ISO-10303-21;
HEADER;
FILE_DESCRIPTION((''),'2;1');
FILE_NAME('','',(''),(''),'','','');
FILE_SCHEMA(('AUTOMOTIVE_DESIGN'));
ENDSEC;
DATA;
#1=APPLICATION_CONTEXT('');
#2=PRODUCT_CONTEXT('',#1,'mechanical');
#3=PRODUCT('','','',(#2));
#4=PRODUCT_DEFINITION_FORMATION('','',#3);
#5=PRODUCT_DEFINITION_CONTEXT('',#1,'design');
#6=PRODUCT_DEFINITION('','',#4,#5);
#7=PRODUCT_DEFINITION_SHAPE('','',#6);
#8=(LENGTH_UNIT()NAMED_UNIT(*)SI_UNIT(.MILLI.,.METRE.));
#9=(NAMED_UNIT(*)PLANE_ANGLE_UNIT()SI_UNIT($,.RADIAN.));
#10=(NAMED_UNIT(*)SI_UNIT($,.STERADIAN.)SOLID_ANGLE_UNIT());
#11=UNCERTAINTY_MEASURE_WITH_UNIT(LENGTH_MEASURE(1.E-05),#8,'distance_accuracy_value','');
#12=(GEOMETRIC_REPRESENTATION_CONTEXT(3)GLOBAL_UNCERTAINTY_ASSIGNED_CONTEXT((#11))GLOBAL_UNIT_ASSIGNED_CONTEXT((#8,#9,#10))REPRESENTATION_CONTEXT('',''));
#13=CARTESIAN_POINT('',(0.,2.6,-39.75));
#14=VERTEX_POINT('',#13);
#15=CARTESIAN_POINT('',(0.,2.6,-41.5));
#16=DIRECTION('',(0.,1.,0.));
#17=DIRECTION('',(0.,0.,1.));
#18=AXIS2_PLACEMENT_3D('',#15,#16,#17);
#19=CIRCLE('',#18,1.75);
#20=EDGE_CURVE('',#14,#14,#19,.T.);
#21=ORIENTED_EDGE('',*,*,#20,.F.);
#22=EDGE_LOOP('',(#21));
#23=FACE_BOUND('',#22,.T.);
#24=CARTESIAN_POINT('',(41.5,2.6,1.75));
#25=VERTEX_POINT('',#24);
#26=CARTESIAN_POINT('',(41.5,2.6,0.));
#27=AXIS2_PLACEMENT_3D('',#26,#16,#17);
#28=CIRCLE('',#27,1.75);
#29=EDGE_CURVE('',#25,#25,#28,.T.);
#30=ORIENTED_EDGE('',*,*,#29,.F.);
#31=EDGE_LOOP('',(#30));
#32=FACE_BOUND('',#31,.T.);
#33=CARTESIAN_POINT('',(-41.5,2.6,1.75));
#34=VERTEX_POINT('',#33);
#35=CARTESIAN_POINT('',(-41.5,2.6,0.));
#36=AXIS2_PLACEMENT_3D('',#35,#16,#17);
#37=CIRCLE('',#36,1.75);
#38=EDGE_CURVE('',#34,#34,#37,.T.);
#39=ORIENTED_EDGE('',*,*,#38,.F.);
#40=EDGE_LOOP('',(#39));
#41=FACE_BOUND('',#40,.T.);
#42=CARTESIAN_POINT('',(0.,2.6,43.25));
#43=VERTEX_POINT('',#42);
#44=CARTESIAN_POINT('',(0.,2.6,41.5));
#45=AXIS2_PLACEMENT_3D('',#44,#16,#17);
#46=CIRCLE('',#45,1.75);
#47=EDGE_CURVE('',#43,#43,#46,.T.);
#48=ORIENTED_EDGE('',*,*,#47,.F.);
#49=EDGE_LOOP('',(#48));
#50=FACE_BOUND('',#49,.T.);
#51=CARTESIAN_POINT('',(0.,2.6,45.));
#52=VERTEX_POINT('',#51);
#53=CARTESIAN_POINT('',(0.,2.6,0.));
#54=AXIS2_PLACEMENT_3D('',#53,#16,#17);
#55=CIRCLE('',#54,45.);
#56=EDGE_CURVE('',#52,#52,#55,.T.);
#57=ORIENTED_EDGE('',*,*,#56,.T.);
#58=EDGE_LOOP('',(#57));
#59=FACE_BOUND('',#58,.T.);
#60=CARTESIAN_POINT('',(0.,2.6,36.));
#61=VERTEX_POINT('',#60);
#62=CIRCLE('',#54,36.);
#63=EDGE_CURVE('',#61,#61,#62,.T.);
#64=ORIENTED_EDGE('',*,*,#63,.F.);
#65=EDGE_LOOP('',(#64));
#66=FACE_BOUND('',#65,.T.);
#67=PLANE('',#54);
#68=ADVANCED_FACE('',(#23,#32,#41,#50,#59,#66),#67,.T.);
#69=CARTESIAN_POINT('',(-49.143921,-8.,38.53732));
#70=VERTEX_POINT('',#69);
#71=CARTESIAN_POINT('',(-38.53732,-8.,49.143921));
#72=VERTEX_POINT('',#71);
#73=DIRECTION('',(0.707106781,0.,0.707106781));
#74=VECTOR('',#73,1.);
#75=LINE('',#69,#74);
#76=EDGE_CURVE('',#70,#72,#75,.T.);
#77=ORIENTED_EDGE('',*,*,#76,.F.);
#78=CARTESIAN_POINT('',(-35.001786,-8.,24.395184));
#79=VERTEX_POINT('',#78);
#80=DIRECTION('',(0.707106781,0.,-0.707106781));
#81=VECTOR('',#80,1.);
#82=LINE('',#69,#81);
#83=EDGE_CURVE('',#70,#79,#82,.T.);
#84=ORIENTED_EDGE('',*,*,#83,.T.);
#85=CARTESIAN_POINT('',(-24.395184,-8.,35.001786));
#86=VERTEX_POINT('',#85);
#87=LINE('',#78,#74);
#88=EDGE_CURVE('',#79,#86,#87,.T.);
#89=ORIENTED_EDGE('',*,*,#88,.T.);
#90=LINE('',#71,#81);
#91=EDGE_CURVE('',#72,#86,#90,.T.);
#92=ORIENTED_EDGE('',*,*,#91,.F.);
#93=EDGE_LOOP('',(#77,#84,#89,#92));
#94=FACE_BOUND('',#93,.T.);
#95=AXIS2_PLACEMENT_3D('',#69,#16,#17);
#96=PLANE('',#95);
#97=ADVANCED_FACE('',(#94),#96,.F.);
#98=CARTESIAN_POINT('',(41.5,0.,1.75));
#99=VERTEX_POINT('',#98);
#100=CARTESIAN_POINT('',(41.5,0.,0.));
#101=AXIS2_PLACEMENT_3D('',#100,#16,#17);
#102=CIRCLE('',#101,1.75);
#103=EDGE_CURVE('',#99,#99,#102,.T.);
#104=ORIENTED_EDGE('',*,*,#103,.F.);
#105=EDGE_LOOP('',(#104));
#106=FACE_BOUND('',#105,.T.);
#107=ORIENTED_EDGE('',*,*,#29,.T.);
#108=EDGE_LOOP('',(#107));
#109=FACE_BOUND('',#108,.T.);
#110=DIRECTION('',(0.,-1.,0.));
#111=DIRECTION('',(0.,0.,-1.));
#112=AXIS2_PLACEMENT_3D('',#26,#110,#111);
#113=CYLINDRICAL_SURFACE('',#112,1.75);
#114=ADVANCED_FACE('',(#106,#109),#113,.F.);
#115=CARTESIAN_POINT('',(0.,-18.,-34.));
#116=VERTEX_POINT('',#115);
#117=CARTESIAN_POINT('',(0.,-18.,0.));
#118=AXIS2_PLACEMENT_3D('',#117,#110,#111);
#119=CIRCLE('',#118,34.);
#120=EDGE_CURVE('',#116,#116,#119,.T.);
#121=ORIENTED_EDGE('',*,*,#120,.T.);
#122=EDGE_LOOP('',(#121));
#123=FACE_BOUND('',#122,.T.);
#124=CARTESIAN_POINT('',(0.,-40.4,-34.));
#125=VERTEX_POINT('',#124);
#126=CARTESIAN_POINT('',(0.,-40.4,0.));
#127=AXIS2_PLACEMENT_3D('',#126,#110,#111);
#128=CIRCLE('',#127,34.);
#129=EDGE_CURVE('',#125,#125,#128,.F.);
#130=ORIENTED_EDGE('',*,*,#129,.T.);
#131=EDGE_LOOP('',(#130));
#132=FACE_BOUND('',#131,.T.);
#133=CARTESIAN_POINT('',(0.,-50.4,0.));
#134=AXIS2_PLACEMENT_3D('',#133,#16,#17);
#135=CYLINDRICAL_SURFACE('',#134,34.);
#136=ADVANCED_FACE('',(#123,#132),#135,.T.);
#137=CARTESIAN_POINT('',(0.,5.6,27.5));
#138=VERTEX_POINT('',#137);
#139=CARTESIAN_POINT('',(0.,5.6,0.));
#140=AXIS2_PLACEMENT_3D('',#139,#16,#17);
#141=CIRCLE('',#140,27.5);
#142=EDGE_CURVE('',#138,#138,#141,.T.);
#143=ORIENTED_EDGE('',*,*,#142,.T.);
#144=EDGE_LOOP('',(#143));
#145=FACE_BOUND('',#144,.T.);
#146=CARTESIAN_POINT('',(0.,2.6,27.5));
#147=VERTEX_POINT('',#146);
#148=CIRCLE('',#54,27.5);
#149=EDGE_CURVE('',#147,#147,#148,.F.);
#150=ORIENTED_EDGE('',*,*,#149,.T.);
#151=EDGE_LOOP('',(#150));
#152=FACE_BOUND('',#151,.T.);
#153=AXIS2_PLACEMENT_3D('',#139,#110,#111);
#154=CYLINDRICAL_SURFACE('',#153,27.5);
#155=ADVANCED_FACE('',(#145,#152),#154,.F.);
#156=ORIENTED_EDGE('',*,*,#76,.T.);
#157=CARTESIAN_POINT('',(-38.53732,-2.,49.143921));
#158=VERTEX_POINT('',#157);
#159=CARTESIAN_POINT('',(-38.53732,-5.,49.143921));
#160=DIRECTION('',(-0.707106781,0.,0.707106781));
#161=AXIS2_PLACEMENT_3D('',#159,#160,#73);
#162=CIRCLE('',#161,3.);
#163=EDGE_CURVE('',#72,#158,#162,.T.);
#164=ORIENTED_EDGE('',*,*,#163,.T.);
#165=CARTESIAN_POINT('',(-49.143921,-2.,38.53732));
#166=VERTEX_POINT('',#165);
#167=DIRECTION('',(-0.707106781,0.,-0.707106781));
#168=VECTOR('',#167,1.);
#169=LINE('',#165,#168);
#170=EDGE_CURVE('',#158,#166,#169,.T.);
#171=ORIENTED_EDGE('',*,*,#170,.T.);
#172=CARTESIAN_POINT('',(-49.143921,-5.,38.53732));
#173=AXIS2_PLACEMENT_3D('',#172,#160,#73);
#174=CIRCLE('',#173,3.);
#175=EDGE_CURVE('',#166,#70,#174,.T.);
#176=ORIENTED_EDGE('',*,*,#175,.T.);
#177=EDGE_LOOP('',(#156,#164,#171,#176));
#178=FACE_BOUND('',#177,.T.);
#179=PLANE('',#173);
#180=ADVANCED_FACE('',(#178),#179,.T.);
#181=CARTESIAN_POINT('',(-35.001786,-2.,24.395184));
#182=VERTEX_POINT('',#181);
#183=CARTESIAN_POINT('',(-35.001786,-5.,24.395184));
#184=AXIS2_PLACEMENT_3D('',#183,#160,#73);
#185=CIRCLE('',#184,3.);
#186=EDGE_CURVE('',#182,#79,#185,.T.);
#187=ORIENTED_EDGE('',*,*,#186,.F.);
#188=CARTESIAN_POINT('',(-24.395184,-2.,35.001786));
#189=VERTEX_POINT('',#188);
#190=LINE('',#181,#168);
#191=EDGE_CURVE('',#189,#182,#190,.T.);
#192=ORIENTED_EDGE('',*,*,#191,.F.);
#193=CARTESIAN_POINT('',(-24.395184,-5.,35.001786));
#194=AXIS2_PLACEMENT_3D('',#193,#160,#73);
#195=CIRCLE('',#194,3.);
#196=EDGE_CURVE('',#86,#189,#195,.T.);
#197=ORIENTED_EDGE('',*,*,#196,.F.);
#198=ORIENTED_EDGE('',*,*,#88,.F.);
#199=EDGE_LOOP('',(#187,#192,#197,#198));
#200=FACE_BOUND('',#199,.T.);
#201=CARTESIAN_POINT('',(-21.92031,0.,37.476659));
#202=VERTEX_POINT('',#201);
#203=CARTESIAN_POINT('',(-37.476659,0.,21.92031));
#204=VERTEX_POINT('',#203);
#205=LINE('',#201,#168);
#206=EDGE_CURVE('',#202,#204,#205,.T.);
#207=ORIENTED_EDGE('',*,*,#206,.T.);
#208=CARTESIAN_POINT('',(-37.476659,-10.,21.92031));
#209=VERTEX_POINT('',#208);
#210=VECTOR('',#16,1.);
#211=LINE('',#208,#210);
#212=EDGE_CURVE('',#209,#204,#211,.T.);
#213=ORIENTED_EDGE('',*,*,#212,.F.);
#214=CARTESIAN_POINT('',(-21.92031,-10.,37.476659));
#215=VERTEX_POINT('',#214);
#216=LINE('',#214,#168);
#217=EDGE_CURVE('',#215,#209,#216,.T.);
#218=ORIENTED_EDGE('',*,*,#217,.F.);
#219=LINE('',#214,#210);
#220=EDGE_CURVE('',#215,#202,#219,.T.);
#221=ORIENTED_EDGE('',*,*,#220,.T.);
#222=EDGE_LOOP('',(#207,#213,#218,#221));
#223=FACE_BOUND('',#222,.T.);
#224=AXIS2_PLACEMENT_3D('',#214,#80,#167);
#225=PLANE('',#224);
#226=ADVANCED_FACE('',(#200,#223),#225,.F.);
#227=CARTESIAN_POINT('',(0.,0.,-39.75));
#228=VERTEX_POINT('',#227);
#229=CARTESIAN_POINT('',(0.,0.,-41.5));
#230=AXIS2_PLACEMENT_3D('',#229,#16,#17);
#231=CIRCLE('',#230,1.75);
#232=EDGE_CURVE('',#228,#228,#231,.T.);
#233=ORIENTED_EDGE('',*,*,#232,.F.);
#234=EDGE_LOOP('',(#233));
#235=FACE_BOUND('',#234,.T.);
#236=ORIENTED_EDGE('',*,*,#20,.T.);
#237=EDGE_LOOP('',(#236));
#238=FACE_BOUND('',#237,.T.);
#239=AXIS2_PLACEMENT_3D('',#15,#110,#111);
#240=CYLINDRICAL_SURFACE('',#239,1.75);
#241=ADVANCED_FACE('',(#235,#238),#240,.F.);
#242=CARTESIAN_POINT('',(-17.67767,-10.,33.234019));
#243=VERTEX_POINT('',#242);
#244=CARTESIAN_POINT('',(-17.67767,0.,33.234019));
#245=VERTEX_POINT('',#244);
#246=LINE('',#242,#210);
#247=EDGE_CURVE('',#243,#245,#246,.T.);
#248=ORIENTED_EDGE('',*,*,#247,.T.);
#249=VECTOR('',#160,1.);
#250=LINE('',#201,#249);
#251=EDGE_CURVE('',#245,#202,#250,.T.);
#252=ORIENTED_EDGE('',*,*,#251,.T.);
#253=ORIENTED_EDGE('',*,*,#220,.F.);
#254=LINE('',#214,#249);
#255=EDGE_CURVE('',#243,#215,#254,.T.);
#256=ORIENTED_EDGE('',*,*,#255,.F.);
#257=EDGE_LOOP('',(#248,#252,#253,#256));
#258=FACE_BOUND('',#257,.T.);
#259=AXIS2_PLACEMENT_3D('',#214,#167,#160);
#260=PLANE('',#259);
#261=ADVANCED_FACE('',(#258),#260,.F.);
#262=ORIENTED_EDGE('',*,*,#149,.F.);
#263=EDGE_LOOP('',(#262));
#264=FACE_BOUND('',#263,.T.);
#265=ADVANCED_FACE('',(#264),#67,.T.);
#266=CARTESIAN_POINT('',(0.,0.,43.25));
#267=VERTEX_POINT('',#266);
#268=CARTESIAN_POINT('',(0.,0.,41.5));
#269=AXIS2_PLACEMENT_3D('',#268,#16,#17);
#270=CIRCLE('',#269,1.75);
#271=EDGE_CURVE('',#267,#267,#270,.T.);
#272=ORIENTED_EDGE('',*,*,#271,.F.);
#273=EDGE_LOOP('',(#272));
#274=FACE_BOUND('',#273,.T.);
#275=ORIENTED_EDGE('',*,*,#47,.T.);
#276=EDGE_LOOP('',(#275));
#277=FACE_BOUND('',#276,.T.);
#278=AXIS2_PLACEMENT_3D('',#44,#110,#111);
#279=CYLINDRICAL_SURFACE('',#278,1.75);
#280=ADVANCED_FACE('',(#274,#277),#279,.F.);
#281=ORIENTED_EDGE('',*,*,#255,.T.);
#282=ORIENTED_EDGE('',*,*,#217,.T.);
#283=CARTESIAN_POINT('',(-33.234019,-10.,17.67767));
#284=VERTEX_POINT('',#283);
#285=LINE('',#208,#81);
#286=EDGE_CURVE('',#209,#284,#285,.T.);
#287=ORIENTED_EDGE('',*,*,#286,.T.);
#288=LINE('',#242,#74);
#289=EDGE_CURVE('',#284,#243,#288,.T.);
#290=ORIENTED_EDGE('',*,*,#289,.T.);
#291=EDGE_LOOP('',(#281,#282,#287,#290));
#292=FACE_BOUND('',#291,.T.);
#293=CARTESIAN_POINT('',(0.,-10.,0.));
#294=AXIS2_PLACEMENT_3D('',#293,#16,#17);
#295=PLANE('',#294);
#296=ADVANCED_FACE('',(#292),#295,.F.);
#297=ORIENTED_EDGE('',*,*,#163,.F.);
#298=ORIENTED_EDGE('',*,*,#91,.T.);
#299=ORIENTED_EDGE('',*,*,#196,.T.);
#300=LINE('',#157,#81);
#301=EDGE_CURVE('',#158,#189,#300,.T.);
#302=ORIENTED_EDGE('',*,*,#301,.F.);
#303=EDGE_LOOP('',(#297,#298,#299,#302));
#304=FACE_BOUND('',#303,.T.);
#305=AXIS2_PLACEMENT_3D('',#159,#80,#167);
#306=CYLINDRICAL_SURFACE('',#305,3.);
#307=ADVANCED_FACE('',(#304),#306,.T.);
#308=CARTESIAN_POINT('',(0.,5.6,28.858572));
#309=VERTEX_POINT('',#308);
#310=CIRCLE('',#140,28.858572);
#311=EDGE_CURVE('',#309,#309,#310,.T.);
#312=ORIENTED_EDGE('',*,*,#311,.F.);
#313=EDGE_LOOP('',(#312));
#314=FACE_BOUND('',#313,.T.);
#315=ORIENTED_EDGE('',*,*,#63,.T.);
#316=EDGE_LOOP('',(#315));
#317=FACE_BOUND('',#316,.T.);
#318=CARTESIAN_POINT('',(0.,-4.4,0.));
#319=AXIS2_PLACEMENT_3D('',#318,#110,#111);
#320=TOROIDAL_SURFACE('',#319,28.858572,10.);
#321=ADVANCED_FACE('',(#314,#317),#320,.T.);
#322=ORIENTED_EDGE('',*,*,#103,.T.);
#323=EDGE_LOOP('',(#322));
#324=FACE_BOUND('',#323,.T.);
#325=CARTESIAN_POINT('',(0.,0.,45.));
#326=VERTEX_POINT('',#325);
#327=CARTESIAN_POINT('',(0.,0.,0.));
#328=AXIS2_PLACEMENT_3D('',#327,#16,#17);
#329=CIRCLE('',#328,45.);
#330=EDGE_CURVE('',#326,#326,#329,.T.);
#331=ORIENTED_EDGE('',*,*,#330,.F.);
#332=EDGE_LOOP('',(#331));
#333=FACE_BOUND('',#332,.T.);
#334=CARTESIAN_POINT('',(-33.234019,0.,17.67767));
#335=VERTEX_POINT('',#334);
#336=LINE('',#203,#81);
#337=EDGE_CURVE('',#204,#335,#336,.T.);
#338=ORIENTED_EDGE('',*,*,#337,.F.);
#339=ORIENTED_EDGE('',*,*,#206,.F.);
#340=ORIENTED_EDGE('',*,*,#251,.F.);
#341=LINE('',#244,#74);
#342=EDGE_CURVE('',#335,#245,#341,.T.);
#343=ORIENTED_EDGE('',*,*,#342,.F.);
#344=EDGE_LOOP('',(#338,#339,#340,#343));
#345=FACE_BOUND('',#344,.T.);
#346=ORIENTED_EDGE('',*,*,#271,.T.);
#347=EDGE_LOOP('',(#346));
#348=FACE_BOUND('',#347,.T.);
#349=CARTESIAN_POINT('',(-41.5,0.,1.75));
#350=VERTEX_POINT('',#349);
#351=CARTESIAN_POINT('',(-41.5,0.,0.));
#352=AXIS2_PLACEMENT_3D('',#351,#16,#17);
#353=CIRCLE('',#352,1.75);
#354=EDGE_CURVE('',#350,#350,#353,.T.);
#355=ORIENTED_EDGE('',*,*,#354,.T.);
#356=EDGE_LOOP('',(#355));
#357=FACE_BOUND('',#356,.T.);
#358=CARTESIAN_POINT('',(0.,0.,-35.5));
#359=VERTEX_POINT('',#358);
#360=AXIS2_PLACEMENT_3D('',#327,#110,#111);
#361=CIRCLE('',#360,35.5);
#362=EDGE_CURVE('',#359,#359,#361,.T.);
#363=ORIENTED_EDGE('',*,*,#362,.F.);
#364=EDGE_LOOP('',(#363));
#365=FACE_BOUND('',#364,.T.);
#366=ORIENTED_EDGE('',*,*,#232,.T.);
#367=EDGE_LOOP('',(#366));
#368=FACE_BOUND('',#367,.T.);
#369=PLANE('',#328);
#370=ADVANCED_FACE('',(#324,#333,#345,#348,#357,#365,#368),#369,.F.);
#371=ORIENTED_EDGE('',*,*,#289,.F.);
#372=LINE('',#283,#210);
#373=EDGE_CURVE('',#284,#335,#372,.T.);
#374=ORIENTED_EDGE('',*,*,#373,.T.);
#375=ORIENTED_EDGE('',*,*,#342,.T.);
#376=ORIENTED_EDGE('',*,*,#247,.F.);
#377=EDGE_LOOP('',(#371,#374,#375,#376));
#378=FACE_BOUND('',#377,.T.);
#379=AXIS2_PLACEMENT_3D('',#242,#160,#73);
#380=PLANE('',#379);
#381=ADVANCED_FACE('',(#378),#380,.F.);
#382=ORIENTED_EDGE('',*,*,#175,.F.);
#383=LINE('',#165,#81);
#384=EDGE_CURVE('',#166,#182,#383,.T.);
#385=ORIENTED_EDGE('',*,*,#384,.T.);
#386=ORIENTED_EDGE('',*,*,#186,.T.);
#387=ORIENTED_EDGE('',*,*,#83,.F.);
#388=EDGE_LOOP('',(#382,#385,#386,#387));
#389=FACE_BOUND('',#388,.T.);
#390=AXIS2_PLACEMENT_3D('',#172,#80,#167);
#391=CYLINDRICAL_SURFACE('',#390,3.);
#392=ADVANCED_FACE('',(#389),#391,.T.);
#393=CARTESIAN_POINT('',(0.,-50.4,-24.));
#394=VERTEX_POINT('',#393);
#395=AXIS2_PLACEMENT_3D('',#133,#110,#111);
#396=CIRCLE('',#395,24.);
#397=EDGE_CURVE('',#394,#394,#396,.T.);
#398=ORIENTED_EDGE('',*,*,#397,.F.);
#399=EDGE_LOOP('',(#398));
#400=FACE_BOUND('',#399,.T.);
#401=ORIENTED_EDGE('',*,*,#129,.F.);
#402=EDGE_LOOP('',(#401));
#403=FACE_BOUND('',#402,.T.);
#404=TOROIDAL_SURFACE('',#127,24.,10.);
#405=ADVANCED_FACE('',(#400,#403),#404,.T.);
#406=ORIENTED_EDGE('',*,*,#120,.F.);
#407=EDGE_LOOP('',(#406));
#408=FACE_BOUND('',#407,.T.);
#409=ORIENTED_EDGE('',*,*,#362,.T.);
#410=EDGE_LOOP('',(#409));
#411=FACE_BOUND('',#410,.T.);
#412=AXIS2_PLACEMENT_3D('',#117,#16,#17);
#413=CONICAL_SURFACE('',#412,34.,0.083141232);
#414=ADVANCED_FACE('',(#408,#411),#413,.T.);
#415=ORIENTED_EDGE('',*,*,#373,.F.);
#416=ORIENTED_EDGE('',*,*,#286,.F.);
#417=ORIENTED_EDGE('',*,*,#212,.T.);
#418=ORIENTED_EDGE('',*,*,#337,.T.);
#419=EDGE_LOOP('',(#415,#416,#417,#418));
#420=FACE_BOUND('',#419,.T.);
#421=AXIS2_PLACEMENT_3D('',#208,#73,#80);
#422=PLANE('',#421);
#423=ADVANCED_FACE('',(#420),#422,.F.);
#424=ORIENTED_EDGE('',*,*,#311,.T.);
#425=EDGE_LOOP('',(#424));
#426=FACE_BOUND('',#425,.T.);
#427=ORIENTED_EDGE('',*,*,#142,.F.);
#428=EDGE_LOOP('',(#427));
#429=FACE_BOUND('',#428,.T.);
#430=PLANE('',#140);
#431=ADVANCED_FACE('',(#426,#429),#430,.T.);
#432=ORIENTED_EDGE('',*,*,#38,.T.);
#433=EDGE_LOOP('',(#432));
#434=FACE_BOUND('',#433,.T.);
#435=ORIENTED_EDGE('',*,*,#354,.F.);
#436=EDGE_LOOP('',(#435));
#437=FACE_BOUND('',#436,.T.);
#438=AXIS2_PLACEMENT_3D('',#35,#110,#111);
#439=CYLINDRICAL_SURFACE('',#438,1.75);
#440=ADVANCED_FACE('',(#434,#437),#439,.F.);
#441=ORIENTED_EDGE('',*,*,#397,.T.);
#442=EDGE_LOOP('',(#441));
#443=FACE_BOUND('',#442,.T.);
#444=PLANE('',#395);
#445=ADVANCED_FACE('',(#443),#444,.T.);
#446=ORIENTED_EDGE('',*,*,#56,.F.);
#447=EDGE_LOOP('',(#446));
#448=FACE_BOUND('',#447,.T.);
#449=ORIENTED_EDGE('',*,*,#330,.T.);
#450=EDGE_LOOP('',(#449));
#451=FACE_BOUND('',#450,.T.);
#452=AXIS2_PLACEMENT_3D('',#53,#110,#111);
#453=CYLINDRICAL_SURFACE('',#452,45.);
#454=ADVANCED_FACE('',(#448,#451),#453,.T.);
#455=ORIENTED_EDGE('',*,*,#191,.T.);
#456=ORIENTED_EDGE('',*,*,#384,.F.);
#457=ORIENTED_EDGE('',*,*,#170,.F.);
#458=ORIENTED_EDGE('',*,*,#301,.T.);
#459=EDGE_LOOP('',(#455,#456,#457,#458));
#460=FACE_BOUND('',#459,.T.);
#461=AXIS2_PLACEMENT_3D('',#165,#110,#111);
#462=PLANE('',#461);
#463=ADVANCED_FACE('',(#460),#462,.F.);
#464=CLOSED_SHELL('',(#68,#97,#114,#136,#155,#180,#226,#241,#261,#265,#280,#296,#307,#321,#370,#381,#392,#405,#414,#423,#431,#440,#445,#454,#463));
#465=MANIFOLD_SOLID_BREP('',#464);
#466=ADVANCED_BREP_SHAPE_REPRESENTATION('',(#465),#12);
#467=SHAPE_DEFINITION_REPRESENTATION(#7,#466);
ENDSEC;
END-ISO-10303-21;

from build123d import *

# Parameters (mm, degrees)
SKETCH_1_R      = 45
SKETCH_1_R_2    = 1.75
EXTRUDE_1_DEPTH = 2.6
SKETCH_3_R      = 34
SKETCH_2_R      = 35.5
SKETCH_4_R      = 34
EXTRUDE_2_DEPTH = 32.4
FILLET_1_R      = 10
EXTRUDE_3_DEPTH = 10
EXTRUDE_4_DEPTH = 20
SKETCH_7_R      = 36
SKETCH_7_R_2    = 27.5
EXTRUDE_5_DEPTH = 3
FILLET_2_R      = 10


with BuildPart() as part:
    # 草图1 → 凸台-拉伸1 (new body)
    with BuildSketch(Plane(origin=(0, 0, 0), x_dir=(1, 0, 0), z_dir=(0, 1, 0))):
        with Locations(Location((0, 0, 0), (0, 0, 270))):
            Circle(SKETCH_1_R)
        with Locations(Location((41.5, 0, 0), (0, 0, 270))):
            Circle(SKETCH_1_R_2, mode=Mode.SUBTRACT)
        with Locations(Location((-41.5, 0, 0), (0, 0, 270))):
            Circle(SKETCH_1_R_2, mode=Mode.SUBTRACT)
        with Locations(Location((0, 41.5, 0), (0, 0, 270))):
            Circle(SKETCH_1_R_2, mode=Mode.SUBTRACT)
        with Locations(Location((0, -41.5, 0), (0, 0, 270))):
            Circle(SKETCH_1_R_2, mode=Mode.SUBTRACT)
    extrude(amount=EXTRUDE_1_DEPTH)

    # 草图3 → 放样1 section 0
    with BuildSketch(Plane(origin=(0, -18, 0), x_dir=(-1, 0, 0), z_dir=(0, -1, 0))):
        Circle(SKETCH_3_R)
    # 草图2 → 放样1 section 1
    with BuildSketch(Plane.XZ):
        Circle(SKETCH_2_R)
    loft()

    # 草图4 → 凸台-拉伸2 (add)
    with BuildSketch(Plane.XZ.offset(18)):
        with Locations(Location((0, 0, 0), (0, 0, 270))):
            Circle(SKETCH_4_R)
    extrude(amount=EXTRUDE_2_DEPTH)

    # 圆角1
    fillet_1_edges = [part.edges().sort_by_distance(p)[0] for p in [
        (0, -50.4, 34),
    ]]
    fillet(fillet_1_edges, radius=FILLET_1_R)

    # 草图5 → 凸台-拉伸3 (add)
    with BuildSketch(Plane.XZ):
        Polygon((-17.67766953, 33.234018716), (-33.234018716, 17.67766953), (-37.476659403, 21.920310217), (-21.920310217, 37.476659403), align=None)
    extrude(amount=EXTRUDE_3_DEPTH)

    # 草图6 → 凸台-拉伸4 (add)
    with BuildSketch(Plane(origin=(-29.69848481, 0, 29.69848481), x_dir=(0.7071067811865436, 0, 0.7071067811865515), z_dir=(-0.7071067811865515, 0, 0.7071067811865436))):
        with BuildLine():
            Line((-7.5, -2), (7.5, -2))
            ThreePointArc((7.5, -2), (10.5, -5), (7.5, -8))
            Line((7.5, -8), (-7.5, -8))
            ThreePointArc((-7.5, -8), (-10.5, -5), (-7.5, -2))
        make_face()
    extrude(amount=EXTRUDE_4_DEPTH)

    # 草图7 → 凸台-拉伸5 (add)
    with BuildSketch(Plane(origin=(0, 2.6, 0), x_dir=(1, 0, 0), z_dir=(0, 1, 0))):
        with Locations(Location((0, 0, 0), (0, 0, 270))):
            Circle(SKETCH_7_R)
        with Locations(Location((0, 0, 0), (0, 0, 270))):
            Circle(SKETCH_7_R_2, mode=Mode.SUBTRACT)
    extrude(amount=EXTRUDE_5_DEPTH)

    # 圆角2
    # the kernel refuses this fillet: 10 mm, written as the material it takes off along each edge
    with BuildSketch(Plane(origin=(0, 5.6, 0), x_dir=(0, 0, 1), z_dir=(-1, 0, 0))) as fillet_2_piece_1:
        with BuildLine():
            CenterArc((28.858571571, -10), FILLET_2_R, 44.427004001, 45.572995999)
            Line((28.858571571, 0), (28.858571571, 0.2))
            Line((28.858571571, 0.2), (36, 0.2))
            Line((36, 0.2), (36.2, 0))
            ThreePointArc((36.2, 0), (36.2, -1.5), (36.142828569, -2.86))
            Line((36.142828569, -2.86), (36, -3))
        make_face()
    revolve(axis=Axis((0, 5.6, 0), (0, 1, 0)), mode=Mode.SUBTRACT)


solid = part.part
